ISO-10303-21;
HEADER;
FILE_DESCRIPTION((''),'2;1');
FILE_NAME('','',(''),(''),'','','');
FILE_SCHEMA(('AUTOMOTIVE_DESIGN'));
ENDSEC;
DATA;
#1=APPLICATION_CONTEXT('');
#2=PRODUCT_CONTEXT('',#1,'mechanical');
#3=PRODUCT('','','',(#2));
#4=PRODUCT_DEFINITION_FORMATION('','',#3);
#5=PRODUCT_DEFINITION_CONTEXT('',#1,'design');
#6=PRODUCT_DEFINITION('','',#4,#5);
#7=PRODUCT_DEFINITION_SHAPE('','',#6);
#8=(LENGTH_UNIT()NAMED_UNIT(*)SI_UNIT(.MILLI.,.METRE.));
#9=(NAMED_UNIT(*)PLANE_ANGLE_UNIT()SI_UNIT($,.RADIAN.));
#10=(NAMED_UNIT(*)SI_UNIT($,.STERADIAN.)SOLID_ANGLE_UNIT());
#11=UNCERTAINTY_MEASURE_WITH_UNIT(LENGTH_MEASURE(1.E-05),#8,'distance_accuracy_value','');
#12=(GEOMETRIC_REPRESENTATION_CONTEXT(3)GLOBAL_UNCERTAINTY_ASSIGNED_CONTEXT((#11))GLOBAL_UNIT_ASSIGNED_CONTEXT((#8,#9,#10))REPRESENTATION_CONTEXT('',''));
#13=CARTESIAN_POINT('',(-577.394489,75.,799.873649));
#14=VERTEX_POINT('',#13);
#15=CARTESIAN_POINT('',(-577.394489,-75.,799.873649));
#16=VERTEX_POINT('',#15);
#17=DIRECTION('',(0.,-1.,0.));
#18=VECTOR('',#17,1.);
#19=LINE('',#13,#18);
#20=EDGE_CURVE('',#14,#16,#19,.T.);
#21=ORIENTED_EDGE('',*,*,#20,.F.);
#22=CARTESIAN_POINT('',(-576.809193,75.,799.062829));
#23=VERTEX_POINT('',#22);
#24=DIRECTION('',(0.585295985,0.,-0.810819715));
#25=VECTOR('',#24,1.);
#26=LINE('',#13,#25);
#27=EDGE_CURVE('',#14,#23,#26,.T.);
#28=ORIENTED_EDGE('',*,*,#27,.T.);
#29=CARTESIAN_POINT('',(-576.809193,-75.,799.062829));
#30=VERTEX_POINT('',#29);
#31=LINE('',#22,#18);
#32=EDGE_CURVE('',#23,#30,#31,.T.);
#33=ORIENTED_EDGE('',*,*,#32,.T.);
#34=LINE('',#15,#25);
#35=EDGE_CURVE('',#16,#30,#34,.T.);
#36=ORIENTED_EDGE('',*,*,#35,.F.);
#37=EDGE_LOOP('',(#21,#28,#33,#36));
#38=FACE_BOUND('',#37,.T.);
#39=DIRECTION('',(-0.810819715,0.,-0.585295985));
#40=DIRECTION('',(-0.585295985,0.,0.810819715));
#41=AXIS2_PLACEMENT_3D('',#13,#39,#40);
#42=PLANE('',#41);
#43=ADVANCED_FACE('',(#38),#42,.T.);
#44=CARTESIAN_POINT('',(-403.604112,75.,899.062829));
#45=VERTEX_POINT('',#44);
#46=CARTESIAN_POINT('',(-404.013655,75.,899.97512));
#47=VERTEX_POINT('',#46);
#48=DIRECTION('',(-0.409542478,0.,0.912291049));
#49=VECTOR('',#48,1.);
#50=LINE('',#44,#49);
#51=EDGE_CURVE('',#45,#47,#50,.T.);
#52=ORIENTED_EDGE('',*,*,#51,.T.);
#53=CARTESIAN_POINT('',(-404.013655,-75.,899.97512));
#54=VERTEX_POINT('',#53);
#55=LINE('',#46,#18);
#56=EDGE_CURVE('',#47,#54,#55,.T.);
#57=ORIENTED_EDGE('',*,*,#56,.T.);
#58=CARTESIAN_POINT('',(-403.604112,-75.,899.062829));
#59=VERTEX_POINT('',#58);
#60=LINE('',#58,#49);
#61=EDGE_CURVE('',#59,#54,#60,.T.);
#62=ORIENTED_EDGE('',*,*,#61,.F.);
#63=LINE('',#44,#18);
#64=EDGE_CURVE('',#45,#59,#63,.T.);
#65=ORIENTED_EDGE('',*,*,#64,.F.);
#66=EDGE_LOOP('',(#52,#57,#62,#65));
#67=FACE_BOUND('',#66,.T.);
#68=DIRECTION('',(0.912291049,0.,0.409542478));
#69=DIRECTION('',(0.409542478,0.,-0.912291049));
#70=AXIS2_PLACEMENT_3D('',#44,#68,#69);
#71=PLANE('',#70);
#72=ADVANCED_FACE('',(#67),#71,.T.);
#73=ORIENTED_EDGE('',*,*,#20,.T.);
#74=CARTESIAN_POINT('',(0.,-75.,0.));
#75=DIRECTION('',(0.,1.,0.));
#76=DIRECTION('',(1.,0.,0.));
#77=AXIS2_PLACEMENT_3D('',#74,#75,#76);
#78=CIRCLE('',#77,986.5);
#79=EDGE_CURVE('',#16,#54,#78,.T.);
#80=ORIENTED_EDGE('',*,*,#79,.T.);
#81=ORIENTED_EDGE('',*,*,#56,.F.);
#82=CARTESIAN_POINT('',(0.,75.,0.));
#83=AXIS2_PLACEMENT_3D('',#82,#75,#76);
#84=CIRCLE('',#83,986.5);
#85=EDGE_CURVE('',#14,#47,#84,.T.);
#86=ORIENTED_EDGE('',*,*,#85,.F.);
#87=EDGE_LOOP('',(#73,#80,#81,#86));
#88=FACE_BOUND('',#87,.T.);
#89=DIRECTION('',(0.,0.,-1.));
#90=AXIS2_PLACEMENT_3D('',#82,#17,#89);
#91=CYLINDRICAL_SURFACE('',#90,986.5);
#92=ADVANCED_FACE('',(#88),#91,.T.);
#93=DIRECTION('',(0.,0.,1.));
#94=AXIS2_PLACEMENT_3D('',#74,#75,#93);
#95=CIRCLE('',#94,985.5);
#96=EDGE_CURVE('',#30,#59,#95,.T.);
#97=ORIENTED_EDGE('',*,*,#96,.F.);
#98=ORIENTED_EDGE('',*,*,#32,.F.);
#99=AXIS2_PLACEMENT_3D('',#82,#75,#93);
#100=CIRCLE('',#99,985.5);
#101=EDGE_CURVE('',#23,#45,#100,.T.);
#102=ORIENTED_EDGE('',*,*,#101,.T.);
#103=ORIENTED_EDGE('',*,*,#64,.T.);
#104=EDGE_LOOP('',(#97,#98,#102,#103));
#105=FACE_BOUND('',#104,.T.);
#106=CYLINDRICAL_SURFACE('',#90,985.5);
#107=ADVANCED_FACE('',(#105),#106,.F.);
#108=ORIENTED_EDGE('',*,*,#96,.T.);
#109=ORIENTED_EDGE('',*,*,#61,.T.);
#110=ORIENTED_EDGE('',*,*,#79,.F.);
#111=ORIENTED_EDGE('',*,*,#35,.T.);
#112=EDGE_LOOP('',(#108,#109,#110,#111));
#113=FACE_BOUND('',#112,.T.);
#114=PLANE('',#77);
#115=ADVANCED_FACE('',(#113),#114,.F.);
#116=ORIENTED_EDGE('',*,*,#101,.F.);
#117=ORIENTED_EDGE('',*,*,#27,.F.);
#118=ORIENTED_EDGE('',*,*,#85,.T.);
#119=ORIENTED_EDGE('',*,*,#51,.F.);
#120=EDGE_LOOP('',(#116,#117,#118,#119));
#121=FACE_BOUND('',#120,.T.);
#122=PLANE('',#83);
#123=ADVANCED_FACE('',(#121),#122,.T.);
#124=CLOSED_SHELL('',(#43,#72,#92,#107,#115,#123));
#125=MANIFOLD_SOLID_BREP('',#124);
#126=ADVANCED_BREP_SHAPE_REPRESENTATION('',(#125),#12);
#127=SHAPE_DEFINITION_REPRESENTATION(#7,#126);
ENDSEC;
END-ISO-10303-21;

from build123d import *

# Parameters (mm, degrees)
SM_BASE_FLANGE_1_DEPTH = 75


# Sheet-metal steps are written as plain solids
with BuildPart() as part:
    # Sketch 1 → 基体-法兰1 (new, symmetric)
    with BuildSketch(Plane(origin=(0, 0, 0), x_dir=(1, 0, 0), z_dir=(0, 1, 0))):
        with BuildLine():
            ThreePointArc((-576.80919323, -799.062828947), (-492.75, -853.46803543), (-403.604112473, -899.062828947))
            Line((-403.604112473, -899.062828947), (-404.013654952, -899.975119996))
            ThreePointArc((-404.013654952, -899.975119996), (-493.25, -854.334060833), (-577.394489215, -799.873648662))
            Line((-577.394489215, -799.873648662), (-576.80919323, -799.062828947))
        make_face()
    extrude(amount=SM_BASE_FLANGE_1_DEPTH, both=True)


solid = part.part
